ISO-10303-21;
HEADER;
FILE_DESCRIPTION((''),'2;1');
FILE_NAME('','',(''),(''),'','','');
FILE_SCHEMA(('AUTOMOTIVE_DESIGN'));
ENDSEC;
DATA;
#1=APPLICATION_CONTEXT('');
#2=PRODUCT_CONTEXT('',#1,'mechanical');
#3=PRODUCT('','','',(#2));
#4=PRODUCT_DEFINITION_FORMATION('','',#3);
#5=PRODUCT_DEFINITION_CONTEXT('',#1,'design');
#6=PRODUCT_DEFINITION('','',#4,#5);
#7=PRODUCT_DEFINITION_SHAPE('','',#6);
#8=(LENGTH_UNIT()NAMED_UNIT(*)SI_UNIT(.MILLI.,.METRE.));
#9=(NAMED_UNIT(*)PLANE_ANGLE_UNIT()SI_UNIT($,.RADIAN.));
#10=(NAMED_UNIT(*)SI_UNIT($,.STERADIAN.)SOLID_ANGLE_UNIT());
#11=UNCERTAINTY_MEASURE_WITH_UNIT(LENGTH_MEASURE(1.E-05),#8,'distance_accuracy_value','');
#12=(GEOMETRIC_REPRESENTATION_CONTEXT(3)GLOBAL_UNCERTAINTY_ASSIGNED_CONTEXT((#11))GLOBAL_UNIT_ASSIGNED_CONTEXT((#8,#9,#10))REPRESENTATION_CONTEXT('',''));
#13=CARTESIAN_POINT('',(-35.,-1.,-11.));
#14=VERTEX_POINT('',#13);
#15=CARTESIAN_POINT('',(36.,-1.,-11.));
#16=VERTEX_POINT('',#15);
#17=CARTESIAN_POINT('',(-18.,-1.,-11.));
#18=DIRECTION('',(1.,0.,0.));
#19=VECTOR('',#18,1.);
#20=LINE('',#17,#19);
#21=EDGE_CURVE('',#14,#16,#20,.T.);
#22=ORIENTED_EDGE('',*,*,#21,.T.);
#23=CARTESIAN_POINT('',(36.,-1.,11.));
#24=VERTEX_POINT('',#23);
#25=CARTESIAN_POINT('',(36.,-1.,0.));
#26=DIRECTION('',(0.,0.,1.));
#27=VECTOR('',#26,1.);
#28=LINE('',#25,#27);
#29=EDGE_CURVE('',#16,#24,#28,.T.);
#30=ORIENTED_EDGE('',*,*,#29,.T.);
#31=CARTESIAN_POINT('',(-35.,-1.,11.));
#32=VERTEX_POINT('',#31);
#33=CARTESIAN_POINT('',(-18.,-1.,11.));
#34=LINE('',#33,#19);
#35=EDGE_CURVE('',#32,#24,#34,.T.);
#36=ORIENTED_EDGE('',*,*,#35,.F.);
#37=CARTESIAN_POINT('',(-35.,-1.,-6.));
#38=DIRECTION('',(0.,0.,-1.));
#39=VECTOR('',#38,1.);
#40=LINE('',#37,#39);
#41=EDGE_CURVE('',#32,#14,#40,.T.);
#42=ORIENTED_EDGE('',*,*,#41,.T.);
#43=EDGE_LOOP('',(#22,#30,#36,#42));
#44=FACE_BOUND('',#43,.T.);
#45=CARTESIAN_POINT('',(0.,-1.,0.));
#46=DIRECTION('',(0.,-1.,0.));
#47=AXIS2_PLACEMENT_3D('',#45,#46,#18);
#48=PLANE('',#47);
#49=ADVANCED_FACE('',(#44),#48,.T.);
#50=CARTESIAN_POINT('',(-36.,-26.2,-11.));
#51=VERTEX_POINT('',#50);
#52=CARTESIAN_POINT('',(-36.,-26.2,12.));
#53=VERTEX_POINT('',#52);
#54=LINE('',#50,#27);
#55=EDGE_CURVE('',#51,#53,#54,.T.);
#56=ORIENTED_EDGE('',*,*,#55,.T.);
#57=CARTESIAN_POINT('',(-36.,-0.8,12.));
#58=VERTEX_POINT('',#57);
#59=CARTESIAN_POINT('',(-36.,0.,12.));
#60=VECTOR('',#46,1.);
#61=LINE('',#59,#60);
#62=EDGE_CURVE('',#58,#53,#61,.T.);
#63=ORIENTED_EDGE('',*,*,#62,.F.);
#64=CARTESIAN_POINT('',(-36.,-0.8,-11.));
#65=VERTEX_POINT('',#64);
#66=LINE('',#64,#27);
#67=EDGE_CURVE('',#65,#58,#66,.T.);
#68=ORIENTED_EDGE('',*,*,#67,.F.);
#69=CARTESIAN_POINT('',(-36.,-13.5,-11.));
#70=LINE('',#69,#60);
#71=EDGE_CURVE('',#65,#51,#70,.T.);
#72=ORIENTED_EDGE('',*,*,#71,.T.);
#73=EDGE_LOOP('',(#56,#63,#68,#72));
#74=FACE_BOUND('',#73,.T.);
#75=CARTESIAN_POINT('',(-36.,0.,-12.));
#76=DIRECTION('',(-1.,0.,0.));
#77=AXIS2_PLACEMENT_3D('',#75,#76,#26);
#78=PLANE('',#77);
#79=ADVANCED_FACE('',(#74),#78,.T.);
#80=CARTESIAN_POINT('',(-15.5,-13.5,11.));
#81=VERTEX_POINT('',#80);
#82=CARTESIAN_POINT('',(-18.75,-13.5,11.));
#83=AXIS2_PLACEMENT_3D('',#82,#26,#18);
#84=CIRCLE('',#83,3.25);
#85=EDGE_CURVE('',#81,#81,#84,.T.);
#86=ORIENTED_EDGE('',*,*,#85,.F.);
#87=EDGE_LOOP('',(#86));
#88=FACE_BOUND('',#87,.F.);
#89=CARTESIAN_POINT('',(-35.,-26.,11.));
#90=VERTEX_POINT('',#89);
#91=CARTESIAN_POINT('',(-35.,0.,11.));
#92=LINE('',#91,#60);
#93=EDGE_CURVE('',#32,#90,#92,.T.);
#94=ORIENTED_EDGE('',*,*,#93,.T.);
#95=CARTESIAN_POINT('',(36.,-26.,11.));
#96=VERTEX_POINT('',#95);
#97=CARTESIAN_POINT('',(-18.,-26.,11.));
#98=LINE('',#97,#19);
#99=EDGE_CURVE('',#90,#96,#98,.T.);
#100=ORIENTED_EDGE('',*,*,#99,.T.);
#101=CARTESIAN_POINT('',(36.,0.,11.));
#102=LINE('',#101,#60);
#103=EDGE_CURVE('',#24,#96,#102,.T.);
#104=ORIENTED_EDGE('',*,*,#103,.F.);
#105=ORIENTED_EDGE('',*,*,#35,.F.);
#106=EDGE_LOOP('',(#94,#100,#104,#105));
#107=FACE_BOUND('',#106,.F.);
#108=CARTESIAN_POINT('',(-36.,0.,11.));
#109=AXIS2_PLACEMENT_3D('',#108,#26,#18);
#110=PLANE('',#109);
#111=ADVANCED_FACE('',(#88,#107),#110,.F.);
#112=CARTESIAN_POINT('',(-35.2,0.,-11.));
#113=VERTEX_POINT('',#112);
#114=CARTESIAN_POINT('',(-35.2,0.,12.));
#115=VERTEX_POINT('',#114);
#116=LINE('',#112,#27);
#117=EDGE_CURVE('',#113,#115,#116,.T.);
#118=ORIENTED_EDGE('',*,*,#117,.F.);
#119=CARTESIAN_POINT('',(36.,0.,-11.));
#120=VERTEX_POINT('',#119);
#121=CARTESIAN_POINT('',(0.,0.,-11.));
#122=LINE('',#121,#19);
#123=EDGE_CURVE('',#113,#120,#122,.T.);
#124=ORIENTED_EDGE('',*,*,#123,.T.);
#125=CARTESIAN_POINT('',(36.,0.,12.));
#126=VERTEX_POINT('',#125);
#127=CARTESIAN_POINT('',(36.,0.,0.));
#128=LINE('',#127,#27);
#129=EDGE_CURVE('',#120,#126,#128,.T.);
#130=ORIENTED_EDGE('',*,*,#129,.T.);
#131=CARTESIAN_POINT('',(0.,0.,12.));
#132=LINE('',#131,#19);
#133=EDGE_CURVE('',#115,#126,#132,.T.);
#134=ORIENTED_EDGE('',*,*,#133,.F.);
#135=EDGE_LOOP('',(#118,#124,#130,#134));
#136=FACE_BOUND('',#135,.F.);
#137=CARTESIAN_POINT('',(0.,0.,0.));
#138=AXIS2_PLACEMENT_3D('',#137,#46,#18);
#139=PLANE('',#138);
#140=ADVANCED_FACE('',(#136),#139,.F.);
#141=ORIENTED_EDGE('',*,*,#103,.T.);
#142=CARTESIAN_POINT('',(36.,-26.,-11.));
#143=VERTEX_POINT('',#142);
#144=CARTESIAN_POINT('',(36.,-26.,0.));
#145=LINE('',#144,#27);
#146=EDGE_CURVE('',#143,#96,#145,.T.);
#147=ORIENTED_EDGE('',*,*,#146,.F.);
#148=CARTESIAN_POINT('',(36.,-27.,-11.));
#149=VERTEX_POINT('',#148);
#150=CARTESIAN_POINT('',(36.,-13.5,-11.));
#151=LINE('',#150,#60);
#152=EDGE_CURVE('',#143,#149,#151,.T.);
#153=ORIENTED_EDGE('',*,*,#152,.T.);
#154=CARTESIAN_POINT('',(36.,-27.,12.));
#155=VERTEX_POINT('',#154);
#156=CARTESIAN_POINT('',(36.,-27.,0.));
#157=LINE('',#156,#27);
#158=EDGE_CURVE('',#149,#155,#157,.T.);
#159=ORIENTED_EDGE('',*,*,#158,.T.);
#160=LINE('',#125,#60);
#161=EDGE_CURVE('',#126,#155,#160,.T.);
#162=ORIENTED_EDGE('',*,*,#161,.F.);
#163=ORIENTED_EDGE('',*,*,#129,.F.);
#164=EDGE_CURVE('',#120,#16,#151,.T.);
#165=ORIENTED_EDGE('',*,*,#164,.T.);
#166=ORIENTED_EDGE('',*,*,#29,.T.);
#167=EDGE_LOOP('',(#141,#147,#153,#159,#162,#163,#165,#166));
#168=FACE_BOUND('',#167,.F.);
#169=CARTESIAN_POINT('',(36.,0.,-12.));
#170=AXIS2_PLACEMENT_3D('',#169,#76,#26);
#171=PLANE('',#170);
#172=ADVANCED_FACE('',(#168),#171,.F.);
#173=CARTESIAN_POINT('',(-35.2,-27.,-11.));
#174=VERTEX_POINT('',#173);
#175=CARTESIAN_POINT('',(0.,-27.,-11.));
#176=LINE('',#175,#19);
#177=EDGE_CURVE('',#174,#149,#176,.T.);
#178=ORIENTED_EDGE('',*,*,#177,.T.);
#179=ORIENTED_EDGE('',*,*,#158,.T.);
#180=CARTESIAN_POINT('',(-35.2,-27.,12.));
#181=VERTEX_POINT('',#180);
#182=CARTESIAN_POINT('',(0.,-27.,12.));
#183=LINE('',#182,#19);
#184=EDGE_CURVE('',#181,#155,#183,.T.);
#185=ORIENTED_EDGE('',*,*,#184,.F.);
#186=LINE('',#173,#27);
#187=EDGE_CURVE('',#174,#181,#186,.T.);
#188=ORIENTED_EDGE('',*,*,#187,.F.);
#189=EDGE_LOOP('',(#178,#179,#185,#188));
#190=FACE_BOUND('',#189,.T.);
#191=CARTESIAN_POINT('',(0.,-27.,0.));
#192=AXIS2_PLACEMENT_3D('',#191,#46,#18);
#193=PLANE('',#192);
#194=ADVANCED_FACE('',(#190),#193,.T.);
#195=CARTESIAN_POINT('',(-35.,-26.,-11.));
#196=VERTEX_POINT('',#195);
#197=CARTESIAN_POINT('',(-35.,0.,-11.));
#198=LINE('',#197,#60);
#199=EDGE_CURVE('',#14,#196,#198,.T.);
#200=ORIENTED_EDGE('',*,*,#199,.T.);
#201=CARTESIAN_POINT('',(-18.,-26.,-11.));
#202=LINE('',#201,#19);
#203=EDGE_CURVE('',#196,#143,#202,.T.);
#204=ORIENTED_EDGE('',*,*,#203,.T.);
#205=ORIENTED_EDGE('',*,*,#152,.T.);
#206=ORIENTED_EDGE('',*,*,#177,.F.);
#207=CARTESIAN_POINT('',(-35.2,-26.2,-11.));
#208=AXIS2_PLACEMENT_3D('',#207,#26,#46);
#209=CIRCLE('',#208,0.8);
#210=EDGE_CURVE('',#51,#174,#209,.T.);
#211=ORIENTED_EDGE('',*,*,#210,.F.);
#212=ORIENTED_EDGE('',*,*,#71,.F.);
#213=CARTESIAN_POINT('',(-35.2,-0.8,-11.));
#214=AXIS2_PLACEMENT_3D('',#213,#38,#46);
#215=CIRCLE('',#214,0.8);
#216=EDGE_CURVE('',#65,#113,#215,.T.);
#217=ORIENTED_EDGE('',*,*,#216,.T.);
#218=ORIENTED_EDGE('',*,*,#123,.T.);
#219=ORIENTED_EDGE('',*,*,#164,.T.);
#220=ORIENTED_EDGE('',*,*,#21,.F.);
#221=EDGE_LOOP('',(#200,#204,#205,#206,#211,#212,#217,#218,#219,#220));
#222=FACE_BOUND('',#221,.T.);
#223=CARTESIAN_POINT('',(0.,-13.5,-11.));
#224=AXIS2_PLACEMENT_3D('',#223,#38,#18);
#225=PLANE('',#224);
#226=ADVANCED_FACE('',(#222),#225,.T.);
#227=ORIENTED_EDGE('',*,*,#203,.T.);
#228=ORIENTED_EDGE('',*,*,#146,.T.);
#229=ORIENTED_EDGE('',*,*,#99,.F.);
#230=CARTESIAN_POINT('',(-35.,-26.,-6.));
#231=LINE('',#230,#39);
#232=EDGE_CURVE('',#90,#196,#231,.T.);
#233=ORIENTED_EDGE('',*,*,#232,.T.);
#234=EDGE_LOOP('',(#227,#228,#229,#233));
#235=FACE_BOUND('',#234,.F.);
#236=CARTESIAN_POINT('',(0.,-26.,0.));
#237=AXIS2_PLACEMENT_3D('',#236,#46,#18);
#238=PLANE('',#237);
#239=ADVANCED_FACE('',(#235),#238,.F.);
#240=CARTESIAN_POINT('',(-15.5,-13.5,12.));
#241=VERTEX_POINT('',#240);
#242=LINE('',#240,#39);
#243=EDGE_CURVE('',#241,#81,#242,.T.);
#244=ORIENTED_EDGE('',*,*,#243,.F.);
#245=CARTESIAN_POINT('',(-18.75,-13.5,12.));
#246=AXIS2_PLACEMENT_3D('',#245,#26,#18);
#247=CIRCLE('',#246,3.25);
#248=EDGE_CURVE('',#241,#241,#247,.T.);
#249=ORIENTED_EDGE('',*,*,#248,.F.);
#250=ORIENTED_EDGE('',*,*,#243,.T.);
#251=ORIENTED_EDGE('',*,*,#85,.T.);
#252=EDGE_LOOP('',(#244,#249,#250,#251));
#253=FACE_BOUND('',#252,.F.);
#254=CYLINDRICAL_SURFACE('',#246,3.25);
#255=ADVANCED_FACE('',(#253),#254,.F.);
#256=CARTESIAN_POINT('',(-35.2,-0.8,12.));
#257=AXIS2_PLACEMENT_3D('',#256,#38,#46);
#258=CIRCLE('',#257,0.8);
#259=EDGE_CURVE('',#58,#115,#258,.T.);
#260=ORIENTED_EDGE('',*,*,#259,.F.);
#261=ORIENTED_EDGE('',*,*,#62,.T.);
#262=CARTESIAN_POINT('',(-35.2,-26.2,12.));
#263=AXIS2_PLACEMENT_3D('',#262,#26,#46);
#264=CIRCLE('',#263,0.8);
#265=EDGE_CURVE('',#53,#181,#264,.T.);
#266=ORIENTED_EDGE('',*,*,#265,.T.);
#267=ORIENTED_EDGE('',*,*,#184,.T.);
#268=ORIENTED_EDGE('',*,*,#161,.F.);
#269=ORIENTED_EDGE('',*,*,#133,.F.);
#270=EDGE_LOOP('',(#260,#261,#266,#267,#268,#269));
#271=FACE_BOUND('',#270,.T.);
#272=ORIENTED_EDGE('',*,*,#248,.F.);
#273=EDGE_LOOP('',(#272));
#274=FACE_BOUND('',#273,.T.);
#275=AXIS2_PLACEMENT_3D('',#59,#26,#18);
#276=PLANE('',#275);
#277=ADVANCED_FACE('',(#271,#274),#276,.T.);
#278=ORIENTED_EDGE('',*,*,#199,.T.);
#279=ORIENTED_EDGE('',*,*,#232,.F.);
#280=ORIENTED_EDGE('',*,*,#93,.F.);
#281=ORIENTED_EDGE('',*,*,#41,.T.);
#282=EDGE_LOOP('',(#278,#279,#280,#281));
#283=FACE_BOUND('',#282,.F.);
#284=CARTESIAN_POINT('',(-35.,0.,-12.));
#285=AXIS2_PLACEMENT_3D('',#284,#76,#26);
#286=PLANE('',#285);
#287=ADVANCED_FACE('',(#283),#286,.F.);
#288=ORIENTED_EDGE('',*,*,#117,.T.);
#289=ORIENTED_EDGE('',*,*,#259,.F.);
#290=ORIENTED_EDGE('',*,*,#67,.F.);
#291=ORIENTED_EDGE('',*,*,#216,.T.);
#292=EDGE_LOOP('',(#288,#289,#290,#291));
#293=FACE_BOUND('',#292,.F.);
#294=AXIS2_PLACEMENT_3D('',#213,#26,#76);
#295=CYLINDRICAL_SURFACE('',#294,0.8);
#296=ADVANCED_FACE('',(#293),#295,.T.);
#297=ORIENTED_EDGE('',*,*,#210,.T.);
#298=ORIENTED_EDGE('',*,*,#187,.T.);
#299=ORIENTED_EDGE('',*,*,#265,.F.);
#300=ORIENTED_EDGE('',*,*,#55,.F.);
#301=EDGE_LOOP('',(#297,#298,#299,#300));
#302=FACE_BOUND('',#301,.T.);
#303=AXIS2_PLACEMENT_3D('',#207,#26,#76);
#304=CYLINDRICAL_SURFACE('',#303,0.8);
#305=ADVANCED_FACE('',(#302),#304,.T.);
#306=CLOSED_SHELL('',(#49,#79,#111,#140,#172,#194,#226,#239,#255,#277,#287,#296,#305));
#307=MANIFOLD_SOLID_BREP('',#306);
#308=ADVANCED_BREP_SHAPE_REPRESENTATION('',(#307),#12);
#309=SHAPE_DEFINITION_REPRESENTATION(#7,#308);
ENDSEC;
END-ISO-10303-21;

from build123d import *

# Parameters (mm, degrees)
F0_W     = 72
F0_H     = 24
F1_DEPTH = 27
F2_T     = -1
F3_R     = 3.25
F4_DEPTH = 25
F5_W     = 72
F5_H     = 27
F5_R     = 3.25
F6_DEPTH = 1
F8_DEPTH = 1
F9_R     = 0.8


# Not quite as in the source:
# - a feature names something its author has since deleted; it is built from what else it names


with BuildPart() as f1:
    # F0 (on Front) → F1 (new body)
    with BuildSketch(Plane.XZ):
        Rectangle(F0_W, F0_H)
    extrude(amount=F1_DEPTH)

    # F2
    f2_openings = [f1.faces().sort_by_distance(p)[0] for p in [
        (36, -13.5, 0),
    ]]
    offset(amount=F2_T, openings=f2_openings)

    # F3 (on face) → F4 (cut)
    with BuildSketch(Plane.XY.offset(12)):
        with Locations((-18.75, -13.5)):
            Circle(F3_R)
    extrude(amount=-F4_DEPTH, mode=Mode.SUBTRACT)

    # F5 (on face) → F6 (cut)
    with BuildSketch(Plane(origin=(0, 0, -12), x_dir=(1, 0, 0), z_dir=(0, 0, -1))):
        with Locations((0, 13.5)):
            Rectangle(F5_W, F5_H)
        with Locations((-18.75, 13.5)):
            Circle(F5_R, mode=Mode.SUBTRACT)
    extrude(amount=-F6_DEPTH, mode=Mode.SUBTRACT)

    # F9
    f9_edges = [f1.edges().sort_by_distance(p)[0] for p in [
        (-36, -27, 0.5),
        (-36, 0, 0.5),
    ]]
    fillet(f9_edges, radius=F9_R)


with BuildPart() as f8:
    # F7 (on face) → F8 (new body)
    with BuildSketch(Plane.XY.offset(12)):
        with BuildLine():
            Line((-36, -1), (-36, -27))
            Line((-36, -27), (36, -27))
            Line((36, -27), (36, -16.75))
            Line((36, -16.75), (-18.75, -16.75))
            ThreePointArc((-18.75, -16.75), (-22, -13.5), (-18.75, -10.25))
            Line((-18.75, -10.25), (36, -10.25))
            Line((36, -10.25), (36, -1))
            Line((36, -1), (-36, -1))
        make_face()
    extrude(amount=F8_DEPTH)


solid = f1.part
